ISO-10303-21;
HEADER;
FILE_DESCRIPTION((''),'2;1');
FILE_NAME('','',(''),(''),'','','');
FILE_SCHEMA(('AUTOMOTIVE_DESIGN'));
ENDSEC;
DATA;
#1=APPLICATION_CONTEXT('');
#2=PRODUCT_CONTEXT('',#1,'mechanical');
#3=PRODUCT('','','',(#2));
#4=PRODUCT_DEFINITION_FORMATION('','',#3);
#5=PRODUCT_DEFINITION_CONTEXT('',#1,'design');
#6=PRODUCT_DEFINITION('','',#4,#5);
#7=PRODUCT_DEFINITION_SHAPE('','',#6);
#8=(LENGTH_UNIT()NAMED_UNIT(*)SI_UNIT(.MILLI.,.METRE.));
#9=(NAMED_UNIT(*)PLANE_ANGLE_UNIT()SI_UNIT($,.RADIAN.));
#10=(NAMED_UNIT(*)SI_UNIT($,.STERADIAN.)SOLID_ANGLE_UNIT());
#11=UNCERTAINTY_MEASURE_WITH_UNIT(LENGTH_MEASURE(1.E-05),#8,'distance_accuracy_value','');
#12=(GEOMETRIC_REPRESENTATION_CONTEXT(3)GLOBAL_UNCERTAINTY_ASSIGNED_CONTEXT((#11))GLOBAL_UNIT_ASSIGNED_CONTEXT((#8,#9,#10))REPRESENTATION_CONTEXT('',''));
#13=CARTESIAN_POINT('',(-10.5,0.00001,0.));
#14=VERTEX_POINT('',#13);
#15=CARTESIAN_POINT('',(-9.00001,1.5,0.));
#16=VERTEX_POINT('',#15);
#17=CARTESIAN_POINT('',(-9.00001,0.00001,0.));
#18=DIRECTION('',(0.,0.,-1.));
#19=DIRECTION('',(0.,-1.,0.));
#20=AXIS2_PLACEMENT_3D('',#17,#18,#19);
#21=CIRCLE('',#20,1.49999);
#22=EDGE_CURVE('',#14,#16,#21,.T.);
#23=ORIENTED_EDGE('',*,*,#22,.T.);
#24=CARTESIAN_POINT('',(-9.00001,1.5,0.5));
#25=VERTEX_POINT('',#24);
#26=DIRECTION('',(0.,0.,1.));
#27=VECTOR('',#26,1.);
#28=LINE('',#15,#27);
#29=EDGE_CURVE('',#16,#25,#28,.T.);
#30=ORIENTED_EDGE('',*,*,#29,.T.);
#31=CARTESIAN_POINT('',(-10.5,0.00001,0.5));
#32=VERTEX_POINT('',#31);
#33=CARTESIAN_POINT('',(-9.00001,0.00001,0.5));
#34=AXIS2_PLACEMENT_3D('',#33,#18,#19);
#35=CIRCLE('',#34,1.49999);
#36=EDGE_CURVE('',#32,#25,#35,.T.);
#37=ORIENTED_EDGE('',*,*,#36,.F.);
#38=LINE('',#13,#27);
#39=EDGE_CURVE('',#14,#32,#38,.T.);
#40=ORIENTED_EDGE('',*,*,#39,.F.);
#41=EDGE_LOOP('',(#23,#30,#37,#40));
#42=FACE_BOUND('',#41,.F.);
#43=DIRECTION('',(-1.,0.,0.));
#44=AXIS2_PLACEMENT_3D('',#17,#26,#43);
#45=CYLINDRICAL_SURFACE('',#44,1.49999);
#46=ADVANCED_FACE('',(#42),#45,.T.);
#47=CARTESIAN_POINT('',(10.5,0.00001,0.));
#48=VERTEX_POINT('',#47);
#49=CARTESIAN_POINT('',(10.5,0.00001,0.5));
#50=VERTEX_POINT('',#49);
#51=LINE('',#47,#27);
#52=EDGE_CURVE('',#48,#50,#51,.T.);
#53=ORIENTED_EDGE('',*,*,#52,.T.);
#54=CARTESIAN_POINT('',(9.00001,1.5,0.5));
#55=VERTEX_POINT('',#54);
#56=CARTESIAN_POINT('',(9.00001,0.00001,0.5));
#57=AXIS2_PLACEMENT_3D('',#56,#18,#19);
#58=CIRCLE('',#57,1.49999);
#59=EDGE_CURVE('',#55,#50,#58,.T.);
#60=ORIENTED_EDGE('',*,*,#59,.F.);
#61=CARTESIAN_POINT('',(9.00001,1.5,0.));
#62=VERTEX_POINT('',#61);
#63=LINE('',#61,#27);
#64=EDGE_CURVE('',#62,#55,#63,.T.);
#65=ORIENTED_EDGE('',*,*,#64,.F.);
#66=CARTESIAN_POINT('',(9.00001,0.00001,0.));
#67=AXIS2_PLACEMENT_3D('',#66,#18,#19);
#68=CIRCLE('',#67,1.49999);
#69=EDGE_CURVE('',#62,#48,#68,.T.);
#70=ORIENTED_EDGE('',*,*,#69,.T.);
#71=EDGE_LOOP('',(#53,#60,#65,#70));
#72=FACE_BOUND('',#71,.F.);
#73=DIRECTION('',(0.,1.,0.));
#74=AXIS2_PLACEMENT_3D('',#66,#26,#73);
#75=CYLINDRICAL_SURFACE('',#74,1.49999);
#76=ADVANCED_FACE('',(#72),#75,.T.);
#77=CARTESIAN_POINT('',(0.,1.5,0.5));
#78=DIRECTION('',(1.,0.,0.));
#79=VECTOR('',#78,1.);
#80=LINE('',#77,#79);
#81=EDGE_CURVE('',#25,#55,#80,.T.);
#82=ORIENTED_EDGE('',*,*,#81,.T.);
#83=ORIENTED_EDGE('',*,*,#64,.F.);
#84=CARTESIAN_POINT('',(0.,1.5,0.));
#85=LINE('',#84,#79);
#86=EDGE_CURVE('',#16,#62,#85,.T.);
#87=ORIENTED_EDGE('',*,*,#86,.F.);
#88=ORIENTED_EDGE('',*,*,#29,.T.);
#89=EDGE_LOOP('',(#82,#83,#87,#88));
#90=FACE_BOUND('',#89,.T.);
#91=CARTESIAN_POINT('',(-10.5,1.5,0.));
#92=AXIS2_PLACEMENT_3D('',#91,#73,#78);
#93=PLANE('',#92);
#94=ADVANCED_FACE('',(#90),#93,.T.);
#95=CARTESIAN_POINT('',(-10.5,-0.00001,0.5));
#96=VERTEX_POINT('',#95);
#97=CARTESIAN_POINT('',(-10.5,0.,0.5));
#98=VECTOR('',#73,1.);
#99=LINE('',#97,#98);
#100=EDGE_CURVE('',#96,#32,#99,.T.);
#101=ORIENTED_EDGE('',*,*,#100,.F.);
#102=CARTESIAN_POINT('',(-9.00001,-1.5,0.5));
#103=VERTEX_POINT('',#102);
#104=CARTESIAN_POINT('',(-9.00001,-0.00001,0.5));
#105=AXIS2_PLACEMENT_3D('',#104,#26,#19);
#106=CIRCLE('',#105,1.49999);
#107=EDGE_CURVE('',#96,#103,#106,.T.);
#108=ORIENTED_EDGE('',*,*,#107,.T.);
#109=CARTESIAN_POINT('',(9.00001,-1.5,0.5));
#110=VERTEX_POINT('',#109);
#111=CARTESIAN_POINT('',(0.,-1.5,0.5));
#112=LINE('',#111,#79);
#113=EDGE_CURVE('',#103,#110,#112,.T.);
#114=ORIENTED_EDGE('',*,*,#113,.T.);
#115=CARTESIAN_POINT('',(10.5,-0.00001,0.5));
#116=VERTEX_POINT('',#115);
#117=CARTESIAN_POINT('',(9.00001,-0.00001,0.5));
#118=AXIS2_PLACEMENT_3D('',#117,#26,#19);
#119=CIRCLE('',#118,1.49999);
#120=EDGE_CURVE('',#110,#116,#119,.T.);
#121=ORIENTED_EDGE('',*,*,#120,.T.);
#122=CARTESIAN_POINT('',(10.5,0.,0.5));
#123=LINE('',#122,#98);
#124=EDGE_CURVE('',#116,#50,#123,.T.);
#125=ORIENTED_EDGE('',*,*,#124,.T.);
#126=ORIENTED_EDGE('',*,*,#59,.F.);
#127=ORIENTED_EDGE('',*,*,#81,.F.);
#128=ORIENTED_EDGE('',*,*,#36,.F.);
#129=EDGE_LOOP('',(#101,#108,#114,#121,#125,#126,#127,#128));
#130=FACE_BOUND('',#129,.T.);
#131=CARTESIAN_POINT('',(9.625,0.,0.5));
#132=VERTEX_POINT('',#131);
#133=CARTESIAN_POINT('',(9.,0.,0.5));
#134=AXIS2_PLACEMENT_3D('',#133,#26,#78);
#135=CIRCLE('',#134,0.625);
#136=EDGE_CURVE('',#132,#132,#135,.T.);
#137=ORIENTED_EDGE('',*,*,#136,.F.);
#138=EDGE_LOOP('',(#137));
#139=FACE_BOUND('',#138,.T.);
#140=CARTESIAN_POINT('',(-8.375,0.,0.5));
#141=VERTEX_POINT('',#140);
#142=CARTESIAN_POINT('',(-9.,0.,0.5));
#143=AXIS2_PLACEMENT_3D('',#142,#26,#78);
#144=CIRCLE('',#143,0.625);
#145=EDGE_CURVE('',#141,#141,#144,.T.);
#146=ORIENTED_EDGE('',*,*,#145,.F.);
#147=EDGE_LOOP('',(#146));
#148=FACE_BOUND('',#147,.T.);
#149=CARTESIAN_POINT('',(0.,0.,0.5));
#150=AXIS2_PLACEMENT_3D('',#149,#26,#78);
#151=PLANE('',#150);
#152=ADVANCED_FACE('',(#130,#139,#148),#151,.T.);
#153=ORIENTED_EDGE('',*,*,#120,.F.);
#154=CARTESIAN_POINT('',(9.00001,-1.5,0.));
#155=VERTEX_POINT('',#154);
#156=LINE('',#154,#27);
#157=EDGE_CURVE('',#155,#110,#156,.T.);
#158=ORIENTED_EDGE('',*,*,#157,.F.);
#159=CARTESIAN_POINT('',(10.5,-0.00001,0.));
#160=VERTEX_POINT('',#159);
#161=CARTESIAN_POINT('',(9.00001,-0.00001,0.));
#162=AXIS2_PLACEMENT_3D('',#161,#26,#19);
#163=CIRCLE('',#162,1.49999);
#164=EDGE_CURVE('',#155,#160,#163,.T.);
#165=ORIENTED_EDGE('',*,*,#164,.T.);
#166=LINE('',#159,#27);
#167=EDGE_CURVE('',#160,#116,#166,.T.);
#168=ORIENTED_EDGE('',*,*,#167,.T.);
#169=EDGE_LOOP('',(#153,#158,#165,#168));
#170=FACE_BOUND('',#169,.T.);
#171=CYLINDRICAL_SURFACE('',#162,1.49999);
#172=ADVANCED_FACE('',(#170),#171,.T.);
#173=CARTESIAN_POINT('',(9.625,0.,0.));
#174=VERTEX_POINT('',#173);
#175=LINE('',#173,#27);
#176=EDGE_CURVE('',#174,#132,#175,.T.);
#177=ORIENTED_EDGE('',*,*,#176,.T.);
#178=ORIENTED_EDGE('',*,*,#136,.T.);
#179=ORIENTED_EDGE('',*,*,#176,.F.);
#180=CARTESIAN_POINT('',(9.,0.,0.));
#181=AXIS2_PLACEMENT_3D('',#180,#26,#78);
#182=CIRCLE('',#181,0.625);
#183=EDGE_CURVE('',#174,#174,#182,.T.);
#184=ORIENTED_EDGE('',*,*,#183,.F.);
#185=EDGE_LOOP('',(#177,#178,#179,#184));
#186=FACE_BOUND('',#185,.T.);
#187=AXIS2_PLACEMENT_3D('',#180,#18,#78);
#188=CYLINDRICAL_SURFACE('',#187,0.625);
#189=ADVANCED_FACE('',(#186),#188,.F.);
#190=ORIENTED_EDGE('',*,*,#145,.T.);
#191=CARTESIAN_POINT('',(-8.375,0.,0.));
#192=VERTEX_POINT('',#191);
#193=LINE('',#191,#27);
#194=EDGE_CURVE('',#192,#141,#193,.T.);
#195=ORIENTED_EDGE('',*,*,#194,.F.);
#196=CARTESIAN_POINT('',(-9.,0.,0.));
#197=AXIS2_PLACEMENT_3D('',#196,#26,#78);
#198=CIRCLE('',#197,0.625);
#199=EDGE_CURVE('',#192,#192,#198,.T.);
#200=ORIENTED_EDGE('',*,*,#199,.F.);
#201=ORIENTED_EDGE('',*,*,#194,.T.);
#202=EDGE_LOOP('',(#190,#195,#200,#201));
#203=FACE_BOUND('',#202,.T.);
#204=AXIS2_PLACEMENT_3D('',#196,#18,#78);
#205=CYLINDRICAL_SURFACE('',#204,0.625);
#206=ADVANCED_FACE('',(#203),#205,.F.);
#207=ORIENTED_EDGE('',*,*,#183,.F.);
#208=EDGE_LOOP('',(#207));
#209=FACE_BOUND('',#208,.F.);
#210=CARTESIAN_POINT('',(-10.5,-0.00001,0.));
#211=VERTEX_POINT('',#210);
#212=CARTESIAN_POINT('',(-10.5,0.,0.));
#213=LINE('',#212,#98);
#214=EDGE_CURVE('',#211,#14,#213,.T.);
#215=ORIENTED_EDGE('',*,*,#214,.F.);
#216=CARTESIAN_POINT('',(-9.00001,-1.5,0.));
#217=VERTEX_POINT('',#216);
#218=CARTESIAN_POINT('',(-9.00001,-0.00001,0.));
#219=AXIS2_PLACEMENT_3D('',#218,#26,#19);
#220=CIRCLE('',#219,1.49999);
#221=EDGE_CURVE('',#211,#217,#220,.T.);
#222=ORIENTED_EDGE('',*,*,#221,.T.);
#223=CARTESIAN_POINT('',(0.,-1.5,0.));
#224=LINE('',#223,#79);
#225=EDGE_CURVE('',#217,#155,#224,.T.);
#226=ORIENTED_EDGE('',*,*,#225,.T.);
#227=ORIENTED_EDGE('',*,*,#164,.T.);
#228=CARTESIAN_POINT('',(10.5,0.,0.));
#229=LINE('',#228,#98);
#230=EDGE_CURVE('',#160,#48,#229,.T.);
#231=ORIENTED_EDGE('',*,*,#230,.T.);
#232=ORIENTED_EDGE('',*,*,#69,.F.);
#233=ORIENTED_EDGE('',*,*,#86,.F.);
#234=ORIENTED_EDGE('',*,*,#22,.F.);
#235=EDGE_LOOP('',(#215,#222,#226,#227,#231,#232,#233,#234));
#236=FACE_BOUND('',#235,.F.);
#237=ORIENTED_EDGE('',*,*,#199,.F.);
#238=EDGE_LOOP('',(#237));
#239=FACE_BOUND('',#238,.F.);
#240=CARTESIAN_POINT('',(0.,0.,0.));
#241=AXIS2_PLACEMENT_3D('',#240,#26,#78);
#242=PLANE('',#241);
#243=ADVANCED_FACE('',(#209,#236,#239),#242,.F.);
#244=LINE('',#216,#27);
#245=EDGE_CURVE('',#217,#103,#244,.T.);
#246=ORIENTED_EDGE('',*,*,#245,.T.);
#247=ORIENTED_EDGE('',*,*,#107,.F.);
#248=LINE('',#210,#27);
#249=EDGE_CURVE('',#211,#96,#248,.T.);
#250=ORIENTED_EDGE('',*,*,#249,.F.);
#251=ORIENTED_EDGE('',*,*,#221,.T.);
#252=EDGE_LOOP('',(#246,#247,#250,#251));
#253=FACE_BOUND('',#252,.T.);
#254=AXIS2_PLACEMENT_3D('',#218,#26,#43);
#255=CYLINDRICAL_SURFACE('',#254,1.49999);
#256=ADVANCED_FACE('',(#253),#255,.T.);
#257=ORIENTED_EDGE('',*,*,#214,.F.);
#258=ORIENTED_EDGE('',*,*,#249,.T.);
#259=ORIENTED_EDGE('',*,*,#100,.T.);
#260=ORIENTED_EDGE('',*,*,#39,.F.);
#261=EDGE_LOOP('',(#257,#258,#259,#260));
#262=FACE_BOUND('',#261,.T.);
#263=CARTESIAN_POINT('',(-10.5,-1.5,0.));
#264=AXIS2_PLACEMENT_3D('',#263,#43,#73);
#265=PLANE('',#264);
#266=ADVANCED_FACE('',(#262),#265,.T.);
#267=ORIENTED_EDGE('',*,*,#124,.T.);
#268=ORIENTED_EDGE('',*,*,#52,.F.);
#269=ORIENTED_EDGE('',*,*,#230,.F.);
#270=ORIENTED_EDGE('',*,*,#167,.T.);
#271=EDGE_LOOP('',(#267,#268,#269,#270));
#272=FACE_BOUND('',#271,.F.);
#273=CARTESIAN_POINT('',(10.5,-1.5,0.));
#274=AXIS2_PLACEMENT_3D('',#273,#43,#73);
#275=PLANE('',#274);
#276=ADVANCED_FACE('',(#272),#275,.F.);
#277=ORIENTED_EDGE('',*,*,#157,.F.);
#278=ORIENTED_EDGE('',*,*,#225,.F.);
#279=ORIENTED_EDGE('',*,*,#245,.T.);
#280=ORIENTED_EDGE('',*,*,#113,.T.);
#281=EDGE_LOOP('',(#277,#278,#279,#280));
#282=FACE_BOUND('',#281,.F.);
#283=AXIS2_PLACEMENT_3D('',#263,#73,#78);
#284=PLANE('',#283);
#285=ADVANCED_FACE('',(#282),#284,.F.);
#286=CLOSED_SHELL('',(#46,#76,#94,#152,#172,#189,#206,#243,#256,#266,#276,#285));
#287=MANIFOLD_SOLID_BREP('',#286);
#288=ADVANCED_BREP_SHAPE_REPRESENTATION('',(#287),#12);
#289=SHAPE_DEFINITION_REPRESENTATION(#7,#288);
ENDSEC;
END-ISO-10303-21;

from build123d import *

# Parameters (mm, degrees)
F0_W     = 21
F0_H     = 3
F0_R     = 0.625
F1_DEPTH = 0.5
F2_R     = 1.49999


# Not quite as in the source:
# - a fillet or chamfer is up to 0.001 mm smaller than in the source, because OpenCascade refuses the exact size


with BuildPart() as f1:
    # F0 (on Top) → F1 (new body)
    with BuildSketch(Plane.XY):
        Rectangle(F0_W, F0_H)
        with Locations((-9, 0)):
            Circle(F0_R, mode=Mode.SUBTRACT)
        with Locations((9, 0)):
            Circle(F0_R, mode=Mode.SUBTRACT)
    extrude(amount=F1_DEPTH)

    # F2 (radius 1.5 in the source; OpenCascade refuses exactly that, so slightly less here)
    f2_edges = [f1.edges().sort_by_distance(p)[0] for p in [
        (-10.5, -1.5, 0.25),
        (-10.5, 1.5, 0.25),
        (10.5, -1.5, 0.25),
        (10.5, 1.5, 0.25),
    ]]
    fillet(f2_edges, radius=F2_R)


solid = f1.part
